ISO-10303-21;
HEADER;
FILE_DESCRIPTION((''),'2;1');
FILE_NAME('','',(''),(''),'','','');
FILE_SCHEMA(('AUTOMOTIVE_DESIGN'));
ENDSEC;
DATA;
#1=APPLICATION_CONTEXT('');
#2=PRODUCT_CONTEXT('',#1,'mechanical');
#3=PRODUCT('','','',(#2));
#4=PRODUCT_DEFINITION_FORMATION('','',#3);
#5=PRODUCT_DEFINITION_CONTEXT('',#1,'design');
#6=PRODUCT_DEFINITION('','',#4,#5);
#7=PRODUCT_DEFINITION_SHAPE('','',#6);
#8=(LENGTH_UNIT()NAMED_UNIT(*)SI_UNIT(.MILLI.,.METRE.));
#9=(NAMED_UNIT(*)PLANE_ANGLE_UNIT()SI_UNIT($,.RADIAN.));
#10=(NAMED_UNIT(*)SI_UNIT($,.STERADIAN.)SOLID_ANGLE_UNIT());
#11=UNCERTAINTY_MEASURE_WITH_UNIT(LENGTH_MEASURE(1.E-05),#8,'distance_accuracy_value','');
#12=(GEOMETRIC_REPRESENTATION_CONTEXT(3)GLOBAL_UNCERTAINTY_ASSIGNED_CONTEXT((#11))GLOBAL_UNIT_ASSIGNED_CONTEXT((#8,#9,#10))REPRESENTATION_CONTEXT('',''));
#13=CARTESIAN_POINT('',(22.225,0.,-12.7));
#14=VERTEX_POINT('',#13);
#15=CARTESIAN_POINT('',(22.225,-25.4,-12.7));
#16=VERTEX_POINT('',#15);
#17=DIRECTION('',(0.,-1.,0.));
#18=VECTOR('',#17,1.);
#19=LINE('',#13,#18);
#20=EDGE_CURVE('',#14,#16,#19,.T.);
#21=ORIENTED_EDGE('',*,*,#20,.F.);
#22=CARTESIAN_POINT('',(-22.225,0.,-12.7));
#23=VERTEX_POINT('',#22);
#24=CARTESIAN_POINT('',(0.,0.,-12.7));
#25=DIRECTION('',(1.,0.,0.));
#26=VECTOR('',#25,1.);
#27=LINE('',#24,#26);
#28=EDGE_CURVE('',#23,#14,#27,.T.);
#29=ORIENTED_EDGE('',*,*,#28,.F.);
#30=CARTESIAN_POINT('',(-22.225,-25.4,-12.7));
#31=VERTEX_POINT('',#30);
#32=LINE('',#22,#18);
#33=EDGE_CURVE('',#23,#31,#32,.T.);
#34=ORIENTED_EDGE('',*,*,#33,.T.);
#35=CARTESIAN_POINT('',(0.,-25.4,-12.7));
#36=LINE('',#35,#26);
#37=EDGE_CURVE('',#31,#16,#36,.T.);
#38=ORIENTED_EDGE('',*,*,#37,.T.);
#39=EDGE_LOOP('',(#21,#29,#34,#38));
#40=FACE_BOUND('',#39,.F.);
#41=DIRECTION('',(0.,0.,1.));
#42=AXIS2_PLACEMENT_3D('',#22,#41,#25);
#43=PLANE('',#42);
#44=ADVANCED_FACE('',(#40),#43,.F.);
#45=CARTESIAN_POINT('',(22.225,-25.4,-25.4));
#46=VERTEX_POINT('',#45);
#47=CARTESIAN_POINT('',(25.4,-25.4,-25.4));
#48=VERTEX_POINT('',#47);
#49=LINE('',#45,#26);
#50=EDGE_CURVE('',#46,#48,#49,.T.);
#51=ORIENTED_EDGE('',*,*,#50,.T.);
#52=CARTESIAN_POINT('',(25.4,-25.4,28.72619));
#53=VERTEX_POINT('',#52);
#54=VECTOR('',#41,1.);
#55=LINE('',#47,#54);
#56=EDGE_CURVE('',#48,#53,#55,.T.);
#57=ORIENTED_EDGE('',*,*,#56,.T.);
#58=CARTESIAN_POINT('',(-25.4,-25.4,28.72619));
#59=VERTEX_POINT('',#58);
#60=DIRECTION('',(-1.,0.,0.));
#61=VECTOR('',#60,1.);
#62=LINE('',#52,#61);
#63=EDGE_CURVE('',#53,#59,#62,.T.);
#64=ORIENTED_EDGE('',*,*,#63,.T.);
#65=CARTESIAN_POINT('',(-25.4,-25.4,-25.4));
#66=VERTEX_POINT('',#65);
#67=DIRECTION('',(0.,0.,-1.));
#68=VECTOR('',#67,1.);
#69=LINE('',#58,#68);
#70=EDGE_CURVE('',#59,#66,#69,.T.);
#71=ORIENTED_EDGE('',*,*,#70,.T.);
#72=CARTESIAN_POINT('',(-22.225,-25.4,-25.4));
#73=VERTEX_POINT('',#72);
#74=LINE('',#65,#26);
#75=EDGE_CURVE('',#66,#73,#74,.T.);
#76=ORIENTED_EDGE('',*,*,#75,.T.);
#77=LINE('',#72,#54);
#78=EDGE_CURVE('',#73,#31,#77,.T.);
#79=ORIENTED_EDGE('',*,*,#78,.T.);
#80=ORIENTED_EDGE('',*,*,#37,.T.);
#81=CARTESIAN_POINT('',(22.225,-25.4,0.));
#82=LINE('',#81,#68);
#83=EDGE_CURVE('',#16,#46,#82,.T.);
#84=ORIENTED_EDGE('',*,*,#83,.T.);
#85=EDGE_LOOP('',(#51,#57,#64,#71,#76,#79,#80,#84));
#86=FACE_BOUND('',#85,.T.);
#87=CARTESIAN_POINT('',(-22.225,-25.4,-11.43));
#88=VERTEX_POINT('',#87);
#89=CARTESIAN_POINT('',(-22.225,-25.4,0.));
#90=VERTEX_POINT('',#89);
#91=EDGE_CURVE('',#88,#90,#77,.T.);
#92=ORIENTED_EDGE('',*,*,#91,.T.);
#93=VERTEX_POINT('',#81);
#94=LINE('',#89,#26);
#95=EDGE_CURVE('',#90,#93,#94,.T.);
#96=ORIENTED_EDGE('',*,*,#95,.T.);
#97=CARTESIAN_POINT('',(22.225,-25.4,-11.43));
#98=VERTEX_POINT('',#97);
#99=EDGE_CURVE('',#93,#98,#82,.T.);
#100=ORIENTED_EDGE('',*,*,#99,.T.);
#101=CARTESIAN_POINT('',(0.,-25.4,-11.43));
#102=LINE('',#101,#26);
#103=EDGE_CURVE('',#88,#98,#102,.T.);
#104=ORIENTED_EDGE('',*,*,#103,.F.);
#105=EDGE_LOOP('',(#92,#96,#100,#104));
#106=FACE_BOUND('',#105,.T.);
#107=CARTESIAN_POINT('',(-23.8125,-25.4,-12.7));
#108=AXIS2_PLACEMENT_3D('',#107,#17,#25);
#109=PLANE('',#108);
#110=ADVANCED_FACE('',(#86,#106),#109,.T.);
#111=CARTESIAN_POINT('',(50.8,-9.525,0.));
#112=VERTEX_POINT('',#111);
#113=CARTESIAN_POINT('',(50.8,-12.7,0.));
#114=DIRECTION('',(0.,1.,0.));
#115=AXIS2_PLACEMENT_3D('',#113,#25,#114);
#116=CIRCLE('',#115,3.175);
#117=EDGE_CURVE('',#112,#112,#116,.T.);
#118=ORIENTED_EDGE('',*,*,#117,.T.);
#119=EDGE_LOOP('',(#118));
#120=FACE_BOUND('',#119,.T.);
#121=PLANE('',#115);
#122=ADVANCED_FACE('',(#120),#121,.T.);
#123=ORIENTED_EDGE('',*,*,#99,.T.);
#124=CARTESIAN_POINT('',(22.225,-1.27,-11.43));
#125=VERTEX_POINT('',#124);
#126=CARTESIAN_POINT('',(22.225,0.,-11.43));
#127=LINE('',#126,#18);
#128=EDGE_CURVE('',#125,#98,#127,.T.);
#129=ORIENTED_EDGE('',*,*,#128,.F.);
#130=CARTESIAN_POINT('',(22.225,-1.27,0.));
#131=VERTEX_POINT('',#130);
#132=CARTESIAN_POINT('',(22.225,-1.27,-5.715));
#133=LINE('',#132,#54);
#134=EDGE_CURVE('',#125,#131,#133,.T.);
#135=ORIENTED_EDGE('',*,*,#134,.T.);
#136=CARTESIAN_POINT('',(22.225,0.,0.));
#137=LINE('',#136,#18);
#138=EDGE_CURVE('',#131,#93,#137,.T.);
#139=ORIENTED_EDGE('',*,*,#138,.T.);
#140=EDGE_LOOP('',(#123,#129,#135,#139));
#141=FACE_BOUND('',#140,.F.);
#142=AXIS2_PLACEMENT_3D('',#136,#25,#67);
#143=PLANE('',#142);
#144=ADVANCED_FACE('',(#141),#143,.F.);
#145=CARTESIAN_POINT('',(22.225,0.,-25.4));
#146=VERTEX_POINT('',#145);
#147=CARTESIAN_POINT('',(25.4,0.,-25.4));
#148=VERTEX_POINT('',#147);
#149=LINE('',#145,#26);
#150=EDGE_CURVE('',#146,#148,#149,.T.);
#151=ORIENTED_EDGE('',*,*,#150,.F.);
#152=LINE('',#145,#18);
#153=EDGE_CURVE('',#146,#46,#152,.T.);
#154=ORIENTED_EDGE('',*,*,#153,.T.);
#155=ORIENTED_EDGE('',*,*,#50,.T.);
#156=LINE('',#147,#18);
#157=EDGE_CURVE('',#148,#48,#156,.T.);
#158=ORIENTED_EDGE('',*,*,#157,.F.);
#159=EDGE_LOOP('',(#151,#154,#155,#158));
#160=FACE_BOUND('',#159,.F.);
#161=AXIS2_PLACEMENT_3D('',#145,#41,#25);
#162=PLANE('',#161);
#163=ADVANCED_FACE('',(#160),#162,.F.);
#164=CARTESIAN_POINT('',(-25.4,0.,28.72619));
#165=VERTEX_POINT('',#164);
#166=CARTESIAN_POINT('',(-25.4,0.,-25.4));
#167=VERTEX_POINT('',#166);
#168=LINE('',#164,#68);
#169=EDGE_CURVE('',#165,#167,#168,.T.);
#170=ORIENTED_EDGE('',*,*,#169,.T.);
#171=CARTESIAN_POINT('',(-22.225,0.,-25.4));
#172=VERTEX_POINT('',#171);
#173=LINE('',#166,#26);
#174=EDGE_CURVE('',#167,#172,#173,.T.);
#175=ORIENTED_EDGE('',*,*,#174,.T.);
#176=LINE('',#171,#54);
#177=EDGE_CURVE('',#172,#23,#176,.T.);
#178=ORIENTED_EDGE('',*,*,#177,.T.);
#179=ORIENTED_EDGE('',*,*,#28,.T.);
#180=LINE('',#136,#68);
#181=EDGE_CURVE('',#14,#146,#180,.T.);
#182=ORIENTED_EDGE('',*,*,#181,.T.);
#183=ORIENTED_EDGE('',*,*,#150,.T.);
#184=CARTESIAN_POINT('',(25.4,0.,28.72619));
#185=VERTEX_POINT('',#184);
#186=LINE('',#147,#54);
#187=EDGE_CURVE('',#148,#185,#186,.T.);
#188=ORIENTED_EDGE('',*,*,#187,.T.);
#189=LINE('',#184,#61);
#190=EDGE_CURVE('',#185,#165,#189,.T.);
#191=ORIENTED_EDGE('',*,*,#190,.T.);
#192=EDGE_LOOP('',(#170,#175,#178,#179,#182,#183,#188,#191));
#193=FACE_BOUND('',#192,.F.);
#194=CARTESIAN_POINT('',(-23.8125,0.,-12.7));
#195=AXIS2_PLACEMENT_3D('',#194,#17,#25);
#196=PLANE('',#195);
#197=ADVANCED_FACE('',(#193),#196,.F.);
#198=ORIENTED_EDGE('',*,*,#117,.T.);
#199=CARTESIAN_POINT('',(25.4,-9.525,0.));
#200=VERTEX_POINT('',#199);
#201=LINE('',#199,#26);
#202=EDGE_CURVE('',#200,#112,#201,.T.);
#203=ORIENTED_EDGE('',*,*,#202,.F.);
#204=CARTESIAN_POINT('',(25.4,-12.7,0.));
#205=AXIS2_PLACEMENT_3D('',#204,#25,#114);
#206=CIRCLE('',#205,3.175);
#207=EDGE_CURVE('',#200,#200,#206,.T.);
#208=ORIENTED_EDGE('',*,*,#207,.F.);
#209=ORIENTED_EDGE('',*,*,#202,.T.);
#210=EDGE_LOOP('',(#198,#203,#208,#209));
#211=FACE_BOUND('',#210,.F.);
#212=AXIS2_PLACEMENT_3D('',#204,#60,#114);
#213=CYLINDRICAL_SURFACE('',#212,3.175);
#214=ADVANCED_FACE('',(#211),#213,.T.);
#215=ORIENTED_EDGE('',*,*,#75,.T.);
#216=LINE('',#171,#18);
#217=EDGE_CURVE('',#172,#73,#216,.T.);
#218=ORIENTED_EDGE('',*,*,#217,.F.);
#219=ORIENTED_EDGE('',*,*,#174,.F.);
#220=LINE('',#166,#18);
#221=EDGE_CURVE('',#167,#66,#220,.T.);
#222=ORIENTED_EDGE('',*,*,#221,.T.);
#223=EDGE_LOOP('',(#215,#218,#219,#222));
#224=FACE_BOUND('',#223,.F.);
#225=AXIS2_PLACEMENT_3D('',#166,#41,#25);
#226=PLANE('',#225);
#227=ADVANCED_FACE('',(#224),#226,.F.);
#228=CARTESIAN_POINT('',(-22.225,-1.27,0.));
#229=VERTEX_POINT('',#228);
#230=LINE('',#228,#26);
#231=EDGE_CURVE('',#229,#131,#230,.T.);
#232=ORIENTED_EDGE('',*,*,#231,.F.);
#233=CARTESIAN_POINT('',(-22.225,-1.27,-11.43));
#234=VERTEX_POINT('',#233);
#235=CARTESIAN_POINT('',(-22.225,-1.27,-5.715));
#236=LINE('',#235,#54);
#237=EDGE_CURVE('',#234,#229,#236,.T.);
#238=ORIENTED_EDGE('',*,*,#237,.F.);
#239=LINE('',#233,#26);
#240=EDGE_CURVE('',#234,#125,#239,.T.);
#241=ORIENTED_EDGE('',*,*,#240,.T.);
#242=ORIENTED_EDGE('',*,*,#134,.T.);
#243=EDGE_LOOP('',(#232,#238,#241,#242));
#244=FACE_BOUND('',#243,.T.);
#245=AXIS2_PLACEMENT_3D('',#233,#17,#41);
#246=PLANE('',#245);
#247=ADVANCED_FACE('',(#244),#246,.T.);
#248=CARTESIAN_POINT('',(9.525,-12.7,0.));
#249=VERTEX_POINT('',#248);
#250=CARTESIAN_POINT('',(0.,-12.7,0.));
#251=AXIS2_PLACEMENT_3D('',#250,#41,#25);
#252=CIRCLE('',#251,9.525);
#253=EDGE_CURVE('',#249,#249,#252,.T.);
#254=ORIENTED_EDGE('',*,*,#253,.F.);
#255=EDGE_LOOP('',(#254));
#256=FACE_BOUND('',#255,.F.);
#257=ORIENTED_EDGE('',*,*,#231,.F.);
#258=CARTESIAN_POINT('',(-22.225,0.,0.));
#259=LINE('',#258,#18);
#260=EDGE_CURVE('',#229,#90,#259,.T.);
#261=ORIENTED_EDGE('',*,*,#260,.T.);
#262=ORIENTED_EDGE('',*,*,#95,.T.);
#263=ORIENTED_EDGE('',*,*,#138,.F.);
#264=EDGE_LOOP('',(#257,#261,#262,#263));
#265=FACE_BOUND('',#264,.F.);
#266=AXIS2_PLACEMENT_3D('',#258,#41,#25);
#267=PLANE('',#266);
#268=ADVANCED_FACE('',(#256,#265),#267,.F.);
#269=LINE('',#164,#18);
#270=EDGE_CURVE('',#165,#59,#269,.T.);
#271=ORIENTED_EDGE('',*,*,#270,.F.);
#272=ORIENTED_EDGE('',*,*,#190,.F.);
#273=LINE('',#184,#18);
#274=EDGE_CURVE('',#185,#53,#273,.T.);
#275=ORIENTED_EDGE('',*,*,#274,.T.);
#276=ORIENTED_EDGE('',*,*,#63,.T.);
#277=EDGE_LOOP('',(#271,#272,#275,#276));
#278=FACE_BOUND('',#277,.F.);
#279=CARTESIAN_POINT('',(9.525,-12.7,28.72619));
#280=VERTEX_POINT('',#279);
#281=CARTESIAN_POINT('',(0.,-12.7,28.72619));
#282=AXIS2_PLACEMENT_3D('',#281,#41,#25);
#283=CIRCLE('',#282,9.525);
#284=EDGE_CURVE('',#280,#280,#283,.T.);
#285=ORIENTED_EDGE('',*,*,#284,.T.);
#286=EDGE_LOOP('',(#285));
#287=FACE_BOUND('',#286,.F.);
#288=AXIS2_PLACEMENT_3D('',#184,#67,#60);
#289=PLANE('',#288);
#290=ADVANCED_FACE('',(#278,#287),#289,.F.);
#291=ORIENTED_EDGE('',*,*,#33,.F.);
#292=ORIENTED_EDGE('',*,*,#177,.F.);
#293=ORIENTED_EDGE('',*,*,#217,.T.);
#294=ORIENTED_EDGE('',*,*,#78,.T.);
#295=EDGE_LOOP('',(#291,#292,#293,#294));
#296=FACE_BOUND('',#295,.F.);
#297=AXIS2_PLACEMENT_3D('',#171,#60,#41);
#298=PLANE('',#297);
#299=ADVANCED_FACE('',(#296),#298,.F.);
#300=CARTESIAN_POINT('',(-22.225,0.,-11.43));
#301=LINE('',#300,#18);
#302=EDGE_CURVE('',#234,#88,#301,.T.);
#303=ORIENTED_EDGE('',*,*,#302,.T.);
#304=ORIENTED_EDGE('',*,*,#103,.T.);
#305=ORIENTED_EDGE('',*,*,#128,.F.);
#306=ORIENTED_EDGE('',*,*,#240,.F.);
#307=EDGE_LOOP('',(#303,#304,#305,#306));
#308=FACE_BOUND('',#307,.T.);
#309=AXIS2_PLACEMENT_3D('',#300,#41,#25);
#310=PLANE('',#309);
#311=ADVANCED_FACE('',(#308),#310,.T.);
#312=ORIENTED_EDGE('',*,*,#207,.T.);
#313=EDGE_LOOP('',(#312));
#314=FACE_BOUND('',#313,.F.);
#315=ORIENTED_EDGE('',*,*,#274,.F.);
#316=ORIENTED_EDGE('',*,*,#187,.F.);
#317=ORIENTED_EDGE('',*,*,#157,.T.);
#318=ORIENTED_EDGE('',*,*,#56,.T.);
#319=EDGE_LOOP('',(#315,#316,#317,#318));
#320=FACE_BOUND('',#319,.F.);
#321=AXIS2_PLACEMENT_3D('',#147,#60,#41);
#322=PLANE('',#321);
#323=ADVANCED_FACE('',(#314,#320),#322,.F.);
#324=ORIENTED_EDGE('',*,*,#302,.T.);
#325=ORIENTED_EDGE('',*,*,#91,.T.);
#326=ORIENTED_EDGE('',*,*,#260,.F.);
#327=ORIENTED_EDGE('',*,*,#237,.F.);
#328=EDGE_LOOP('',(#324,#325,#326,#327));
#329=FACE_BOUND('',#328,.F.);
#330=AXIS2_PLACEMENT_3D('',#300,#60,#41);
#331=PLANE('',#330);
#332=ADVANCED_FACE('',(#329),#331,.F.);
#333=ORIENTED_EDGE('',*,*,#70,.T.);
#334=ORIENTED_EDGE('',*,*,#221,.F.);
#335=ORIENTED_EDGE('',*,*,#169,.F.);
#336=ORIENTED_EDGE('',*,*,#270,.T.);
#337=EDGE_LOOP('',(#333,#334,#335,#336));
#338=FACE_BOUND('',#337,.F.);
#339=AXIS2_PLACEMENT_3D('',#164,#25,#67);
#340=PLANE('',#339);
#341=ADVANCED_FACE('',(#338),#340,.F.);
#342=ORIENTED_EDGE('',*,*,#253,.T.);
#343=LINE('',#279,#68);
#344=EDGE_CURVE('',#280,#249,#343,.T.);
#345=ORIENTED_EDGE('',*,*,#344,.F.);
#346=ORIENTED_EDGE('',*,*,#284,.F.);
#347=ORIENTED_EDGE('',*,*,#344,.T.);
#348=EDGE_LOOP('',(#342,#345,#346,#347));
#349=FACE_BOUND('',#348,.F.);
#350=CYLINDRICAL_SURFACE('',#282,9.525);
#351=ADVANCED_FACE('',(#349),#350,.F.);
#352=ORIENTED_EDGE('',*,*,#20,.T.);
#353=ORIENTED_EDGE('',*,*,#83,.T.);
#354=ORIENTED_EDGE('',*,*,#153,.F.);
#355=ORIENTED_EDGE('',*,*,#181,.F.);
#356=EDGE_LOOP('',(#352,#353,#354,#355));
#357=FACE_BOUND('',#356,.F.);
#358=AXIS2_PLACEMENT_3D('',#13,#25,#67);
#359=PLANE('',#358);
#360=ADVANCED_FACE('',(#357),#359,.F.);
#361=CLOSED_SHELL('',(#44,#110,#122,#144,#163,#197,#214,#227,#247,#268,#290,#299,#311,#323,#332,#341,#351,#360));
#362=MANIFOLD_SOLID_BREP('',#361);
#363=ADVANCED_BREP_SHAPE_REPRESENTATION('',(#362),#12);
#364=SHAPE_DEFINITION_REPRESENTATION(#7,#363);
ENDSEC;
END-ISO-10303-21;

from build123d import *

# Parameters (mm, degrees)
F0_W     = 44.45
F0_H     = 1.27
F1_DEPTH = 25.4
F2_R     = 9.525
F3_DEPTH = 38.1
F4_W     = 1.27
F4_H     = 11.43
F5_DEPTH = 44.45
F6_R     = 3.175
F7_DEPTH = 25.4


with BuildPart() as f1:
    # F0 (on Front) → F1 (new body)
    with BuildSketch(Plane.XZ):
        Polygon((-22.225, -11.43), (-22.225, 0), (-25.4, 0), (-25.4, -25.4), (-22.225, -25.4), (-22.225, -12.7), align=None)
        Polygon((25.4, 0), (22.225, 0), (22.225, -11.43), (22.225, -12.7), (22.225, -25.4), (25.4, -25.4), align=None)
        Polygon((-22.225, 0), (0, 0), (22.225, 0), (25.4, 0), (25.4, 28.7261897342), (-25.4, 28.7261897342), (-25.4, 0), align=None)
        with Locations((0, -12.065)):
            Rectangle(F0_W, F0_H)
    extrude(amount=F1_DEPTH)

    # F2 (on face) → F3 (cut)
    with BuildSketch(Plane.XY.offset(28.7261897342)):
        with Locations((0, -12.7)):
            Circle(F2_R)
    extrude(amount=-F3_DEPTH, mode=Mode.SUBTRACT)

    # F4 (on face) → F5 (join)
    with BuildSketch(Plane.YZ.offset(-22.225)):
        with Locations((-0.635, -5.715)):
            Rectangle(F4_W, F4_H)
    extrude(amount=F5_DEPTH)

    # F6 (on face) → F7 (join)
    with BuildSketch(Plane.YZ.offset(25.4)):
        with Locations((-12.7, 0)):
            Circle(F6_R)
    extrude(amount=F7_DEPTH)


solid = f1.part
